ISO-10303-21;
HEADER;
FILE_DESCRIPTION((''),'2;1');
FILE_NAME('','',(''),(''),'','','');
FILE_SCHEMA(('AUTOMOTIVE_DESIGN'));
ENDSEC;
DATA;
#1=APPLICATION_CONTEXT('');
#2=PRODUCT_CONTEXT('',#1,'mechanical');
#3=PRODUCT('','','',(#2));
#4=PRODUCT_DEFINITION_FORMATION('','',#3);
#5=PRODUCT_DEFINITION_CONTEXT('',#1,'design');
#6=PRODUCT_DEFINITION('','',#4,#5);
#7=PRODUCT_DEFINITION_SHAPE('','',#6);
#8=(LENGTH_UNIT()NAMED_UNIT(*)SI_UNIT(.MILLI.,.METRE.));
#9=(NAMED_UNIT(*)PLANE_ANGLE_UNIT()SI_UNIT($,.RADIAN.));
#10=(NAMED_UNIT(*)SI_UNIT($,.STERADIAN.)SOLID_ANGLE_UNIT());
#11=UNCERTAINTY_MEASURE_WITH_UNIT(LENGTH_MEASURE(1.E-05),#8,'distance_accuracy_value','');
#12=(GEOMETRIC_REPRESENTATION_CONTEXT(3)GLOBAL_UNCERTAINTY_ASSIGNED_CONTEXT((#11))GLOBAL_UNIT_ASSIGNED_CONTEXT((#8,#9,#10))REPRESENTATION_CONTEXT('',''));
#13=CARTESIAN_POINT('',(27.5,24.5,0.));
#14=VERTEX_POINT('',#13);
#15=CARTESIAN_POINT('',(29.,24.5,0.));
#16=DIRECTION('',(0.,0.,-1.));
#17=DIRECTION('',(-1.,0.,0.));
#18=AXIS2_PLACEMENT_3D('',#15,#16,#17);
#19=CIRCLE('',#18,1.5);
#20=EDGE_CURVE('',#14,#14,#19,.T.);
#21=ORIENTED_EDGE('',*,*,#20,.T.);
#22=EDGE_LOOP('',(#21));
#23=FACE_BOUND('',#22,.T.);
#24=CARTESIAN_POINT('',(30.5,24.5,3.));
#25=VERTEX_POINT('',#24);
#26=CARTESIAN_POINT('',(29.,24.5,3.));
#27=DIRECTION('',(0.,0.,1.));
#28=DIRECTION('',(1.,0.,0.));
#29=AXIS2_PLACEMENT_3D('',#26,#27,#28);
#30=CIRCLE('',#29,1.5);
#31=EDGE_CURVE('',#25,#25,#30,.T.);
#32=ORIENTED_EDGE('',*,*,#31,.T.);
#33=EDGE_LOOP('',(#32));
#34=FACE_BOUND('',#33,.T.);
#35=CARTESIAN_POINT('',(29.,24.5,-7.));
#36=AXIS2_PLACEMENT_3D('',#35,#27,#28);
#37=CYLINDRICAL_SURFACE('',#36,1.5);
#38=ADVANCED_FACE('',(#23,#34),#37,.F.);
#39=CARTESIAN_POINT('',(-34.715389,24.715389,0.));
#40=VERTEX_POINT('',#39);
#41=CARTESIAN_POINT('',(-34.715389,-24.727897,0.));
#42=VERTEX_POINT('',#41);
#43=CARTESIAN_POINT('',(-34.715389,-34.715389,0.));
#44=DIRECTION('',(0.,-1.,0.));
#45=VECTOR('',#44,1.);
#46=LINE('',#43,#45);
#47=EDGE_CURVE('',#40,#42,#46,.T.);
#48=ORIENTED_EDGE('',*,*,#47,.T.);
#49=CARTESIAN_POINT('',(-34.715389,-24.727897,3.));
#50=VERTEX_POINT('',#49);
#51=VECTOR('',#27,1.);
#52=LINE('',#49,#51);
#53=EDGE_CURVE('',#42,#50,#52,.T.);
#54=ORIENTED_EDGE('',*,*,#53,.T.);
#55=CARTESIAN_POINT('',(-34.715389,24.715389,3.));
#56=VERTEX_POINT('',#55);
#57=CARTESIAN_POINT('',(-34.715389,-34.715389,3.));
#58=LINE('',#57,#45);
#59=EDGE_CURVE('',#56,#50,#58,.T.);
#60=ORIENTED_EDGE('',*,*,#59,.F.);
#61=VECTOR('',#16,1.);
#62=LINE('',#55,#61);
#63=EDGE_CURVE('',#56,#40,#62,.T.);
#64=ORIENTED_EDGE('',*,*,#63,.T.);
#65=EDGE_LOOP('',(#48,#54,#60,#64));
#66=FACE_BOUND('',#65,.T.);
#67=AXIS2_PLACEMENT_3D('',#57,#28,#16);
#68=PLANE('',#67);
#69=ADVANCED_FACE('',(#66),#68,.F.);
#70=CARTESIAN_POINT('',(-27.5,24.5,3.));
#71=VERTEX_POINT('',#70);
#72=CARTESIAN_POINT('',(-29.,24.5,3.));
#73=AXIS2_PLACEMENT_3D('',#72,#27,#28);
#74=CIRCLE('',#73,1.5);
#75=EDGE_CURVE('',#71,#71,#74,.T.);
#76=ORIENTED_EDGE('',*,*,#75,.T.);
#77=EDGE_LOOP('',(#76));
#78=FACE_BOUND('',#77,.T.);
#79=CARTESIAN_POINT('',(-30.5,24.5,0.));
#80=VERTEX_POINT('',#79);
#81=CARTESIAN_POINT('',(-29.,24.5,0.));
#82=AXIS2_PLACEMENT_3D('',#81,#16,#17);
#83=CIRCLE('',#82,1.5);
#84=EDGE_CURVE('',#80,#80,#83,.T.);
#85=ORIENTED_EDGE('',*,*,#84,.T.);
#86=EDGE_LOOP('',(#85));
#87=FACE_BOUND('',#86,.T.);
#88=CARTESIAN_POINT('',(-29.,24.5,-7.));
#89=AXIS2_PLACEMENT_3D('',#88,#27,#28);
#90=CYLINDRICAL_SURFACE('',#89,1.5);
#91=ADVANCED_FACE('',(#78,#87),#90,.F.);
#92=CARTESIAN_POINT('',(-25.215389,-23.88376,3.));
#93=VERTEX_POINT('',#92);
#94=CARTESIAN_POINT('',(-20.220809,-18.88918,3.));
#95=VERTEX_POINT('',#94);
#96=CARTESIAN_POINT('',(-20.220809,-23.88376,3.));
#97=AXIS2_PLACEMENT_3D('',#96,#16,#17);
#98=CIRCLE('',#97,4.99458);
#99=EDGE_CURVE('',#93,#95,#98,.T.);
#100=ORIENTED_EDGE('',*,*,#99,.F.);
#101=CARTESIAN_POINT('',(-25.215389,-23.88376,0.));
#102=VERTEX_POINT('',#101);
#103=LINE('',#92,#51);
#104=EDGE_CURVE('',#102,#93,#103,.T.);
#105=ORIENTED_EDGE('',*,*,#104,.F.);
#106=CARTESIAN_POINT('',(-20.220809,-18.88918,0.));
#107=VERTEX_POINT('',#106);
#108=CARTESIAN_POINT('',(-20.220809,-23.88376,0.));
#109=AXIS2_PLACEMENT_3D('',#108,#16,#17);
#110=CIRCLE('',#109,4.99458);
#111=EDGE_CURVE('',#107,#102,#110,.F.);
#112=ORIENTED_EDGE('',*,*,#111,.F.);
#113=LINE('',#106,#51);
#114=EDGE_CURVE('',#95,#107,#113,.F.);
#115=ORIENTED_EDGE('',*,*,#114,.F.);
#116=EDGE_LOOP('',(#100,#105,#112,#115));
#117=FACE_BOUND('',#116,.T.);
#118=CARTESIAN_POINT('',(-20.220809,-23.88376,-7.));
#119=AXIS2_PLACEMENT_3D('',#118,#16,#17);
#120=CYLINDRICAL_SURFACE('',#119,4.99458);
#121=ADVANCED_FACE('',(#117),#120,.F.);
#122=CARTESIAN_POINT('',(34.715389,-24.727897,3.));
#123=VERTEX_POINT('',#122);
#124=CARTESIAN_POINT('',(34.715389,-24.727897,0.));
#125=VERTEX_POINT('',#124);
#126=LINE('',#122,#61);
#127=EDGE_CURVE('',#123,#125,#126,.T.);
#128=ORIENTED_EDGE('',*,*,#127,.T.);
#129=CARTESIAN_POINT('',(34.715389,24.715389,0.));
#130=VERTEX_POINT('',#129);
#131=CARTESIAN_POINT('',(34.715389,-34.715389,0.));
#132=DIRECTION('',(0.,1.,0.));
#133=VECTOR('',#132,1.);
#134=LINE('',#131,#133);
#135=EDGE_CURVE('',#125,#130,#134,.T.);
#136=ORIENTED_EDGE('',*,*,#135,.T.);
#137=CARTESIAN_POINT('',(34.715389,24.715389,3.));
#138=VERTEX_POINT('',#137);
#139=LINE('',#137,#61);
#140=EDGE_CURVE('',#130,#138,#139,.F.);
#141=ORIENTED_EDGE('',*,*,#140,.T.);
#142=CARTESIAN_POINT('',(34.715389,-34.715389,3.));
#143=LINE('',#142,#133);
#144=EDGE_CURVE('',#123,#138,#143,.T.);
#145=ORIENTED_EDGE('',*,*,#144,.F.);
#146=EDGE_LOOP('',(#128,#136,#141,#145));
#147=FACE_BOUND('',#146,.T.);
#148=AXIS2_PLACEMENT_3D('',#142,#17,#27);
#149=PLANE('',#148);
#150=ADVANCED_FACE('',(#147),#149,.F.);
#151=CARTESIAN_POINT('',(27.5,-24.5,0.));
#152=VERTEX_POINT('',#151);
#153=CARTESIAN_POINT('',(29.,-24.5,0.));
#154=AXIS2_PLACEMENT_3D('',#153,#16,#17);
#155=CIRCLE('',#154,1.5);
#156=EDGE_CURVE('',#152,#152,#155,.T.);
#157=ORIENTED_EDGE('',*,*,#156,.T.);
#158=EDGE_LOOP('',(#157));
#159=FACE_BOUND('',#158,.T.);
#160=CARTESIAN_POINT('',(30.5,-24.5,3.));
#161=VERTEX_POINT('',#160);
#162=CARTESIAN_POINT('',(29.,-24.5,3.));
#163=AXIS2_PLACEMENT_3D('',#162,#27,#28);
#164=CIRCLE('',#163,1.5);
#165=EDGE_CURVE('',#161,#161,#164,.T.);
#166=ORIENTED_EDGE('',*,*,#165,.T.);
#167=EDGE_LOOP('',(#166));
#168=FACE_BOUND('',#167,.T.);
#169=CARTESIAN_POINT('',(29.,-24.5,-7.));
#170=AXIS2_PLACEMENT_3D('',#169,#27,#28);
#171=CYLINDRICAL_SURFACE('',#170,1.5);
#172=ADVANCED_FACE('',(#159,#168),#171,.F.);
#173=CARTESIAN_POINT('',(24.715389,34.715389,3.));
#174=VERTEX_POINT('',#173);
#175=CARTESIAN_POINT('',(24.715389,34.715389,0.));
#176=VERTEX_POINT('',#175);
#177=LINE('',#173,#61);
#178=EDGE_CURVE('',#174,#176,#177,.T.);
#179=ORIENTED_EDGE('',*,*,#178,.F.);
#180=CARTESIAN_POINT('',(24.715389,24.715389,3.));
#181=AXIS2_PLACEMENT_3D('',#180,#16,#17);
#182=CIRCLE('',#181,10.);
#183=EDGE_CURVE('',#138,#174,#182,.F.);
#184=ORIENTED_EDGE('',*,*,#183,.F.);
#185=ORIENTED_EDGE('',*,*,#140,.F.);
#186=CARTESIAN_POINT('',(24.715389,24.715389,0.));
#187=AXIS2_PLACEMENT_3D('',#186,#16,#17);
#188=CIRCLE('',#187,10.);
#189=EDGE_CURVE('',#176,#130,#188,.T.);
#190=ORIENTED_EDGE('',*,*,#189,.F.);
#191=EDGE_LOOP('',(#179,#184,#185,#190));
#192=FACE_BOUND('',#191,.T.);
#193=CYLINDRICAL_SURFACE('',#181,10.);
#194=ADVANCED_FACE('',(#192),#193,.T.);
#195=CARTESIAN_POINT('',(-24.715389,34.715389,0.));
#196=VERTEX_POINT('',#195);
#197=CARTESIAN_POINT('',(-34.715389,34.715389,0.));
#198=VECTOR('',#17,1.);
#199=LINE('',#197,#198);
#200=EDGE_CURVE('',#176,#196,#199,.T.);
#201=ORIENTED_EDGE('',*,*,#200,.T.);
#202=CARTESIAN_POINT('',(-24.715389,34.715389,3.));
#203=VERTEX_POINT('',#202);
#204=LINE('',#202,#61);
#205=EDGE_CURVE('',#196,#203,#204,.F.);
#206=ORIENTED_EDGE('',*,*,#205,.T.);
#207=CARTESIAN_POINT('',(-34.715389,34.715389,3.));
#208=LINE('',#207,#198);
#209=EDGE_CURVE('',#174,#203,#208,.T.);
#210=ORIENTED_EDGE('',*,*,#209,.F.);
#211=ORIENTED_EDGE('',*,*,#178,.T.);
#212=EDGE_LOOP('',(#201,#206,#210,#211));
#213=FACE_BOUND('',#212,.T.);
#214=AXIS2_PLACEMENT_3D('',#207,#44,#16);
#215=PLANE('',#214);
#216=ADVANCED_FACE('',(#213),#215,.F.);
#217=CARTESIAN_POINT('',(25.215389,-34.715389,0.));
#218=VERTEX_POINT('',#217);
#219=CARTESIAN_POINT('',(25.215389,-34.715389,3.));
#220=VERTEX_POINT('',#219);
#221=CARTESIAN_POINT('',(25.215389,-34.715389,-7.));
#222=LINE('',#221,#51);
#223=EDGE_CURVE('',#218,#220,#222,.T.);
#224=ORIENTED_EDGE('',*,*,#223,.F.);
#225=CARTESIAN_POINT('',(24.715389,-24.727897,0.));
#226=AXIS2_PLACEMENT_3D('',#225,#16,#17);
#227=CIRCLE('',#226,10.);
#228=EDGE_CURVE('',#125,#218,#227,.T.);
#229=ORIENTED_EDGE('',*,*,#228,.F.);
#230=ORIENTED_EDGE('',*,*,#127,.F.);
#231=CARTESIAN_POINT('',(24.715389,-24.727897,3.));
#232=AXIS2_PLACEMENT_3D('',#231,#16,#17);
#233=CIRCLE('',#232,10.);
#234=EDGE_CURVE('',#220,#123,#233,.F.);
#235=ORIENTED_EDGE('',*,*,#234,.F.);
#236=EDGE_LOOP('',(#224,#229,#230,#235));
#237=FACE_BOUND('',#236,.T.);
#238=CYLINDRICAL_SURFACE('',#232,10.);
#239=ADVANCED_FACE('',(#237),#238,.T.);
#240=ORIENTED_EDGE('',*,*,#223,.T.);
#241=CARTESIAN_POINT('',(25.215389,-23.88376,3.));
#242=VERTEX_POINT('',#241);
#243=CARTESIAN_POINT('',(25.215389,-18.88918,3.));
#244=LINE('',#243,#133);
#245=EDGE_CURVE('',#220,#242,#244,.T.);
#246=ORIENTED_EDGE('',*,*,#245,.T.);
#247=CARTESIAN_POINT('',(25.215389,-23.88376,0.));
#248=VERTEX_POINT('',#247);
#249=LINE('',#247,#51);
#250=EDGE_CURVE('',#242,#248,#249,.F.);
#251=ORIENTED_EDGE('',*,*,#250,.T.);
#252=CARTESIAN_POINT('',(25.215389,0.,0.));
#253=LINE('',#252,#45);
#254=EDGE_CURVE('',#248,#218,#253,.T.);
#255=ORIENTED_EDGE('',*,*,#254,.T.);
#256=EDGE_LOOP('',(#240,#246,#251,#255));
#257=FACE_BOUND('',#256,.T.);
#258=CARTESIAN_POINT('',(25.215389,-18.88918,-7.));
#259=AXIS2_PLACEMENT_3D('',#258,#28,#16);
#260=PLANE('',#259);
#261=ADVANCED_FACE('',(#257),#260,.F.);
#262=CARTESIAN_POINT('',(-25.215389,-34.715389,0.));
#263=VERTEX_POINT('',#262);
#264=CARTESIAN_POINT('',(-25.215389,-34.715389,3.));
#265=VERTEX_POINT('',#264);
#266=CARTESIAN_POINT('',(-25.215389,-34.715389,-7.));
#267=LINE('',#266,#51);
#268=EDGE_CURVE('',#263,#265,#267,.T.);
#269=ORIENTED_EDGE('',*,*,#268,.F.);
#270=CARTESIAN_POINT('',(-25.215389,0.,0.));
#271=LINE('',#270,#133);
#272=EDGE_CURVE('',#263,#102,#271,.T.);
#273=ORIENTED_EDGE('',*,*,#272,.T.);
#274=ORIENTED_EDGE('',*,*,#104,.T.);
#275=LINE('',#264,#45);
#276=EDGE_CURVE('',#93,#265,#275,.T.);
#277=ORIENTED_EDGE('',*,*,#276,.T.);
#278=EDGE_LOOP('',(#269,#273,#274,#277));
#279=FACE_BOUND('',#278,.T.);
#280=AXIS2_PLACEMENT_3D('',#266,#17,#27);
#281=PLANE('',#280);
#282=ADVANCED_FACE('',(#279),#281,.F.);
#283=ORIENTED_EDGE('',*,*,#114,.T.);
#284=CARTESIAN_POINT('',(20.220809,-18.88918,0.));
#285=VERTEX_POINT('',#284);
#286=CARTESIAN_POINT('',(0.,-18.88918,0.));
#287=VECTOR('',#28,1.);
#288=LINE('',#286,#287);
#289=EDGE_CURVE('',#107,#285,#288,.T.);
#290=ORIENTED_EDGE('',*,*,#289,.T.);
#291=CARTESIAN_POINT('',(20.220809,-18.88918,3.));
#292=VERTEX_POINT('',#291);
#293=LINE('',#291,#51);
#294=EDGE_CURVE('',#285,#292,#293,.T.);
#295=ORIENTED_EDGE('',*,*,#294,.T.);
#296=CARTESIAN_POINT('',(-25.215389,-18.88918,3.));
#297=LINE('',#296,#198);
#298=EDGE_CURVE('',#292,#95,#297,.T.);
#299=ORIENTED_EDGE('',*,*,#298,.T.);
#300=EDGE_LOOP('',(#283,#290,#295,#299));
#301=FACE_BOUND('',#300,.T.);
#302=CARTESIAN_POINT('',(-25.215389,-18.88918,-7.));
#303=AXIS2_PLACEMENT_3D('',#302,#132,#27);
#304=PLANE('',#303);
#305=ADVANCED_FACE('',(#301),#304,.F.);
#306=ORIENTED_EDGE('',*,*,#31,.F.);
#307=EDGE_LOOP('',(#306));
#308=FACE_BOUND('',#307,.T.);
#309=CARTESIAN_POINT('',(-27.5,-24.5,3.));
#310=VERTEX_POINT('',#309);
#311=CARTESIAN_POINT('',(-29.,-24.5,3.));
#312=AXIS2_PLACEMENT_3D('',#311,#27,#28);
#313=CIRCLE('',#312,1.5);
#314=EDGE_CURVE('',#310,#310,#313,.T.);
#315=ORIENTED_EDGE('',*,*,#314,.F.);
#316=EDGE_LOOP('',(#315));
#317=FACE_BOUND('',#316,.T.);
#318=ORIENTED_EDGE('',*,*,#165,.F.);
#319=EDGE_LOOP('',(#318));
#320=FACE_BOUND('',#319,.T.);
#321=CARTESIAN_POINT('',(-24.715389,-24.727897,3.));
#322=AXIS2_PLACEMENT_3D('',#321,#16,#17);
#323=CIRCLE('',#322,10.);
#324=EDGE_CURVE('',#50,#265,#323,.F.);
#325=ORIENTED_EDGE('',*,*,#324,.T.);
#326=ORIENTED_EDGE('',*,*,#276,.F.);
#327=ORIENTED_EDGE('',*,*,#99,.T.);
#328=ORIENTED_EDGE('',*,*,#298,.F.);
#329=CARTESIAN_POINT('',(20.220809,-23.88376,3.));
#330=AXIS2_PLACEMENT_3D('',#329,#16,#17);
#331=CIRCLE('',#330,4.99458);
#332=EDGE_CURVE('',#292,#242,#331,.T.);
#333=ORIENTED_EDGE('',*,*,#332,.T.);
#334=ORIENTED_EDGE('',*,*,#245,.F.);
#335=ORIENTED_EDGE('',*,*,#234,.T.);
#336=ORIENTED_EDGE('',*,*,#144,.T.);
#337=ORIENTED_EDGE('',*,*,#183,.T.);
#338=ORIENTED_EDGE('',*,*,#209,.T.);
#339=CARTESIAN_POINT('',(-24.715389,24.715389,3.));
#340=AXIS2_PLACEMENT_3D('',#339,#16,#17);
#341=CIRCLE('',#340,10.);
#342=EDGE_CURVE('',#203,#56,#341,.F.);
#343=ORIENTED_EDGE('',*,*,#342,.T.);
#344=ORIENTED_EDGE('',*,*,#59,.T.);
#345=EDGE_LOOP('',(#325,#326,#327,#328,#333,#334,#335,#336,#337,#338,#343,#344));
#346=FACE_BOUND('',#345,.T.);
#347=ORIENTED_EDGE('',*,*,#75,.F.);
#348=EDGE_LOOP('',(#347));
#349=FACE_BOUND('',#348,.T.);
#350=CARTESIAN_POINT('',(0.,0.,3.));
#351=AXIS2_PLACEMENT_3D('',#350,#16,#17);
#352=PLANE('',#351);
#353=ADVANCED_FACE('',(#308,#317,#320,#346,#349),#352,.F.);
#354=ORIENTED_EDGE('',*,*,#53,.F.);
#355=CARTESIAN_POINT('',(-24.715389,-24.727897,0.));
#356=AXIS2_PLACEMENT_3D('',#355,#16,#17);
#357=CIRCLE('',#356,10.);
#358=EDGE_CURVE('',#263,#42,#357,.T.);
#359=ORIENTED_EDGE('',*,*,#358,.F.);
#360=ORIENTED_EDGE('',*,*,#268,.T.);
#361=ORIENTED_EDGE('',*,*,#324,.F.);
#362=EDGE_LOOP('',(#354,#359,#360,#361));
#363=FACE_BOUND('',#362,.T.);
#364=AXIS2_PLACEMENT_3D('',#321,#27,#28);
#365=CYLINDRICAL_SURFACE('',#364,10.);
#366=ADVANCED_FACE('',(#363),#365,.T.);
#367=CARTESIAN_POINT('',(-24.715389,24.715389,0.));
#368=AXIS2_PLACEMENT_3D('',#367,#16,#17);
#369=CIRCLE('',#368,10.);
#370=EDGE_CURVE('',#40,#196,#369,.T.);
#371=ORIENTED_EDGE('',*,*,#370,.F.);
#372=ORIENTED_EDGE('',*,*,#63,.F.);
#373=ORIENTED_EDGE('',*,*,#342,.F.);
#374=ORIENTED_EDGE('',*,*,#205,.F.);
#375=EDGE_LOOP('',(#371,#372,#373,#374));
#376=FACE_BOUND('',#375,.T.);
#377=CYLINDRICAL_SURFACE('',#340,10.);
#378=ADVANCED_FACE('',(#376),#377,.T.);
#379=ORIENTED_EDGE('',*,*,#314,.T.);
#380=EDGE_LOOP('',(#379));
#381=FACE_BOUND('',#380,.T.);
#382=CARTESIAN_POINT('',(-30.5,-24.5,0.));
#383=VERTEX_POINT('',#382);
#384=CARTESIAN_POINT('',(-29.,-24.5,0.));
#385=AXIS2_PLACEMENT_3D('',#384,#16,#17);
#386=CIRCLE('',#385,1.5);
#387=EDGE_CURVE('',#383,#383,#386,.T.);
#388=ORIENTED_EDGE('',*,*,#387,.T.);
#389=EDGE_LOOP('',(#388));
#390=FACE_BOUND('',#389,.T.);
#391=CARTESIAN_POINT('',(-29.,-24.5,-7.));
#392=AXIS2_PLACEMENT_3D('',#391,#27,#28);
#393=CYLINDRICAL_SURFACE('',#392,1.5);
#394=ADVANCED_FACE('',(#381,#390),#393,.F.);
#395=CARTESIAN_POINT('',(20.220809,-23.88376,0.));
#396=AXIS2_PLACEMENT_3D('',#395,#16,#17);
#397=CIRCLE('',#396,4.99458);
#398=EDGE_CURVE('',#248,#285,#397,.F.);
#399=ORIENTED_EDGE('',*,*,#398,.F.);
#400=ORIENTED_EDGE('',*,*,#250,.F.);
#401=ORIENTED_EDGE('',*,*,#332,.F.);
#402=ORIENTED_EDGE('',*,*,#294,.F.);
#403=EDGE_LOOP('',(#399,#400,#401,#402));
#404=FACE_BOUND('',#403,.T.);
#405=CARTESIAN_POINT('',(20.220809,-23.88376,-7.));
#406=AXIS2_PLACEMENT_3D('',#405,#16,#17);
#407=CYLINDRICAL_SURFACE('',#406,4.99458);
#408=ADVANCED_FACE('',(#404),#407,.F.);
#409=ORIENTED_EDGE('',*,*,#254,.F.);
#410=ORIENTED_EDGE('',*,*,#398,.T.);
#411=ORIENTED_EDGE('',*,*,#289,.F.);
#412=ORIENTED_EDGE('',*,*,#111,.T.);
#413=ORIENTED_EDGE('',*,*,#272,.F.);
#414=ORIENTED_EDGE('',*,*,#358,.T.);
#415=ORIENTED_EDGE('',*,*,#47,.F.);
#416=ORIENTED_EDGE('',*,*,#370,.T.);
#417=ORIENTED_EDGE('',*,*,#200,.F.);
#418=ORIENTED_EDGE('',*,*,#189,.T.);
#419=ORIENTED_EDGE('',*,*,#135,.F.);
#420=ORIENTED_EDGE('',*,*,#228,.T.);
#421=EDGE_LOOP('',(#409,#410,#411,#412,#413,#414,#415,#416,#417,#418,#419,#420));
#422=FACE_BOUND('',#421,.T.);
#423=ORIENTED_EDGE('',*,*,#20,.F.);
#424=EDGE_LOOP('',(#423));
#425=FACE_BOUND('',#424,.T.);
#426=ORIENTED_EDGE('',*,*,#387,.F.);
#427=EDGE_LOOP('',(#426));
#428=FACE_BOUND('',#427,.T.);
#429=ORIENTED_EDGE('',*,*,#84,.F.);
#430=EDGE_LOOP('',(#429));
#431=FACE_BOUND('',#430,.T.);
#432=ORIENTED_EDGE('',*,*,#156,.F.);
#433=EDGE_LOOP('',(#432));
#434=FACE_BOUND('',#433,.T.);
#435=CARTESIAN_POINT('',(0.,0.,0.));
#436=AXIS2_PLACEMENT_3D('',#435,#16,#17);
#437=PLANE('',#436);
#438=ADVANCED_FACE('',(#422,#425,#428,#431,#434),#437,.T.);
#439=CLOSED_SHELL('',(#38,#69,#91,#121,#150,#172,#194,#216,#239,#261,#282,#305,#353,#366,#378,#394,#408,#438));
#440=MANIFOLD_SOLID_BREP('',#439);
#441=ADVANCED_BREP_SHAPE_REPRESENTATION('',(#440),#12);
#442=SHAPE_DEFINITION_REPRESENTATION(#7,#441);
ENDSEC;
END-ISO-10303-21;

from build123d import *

# Parameters (mm, degrees)
SKETCH1_W           = 69.43077851
SKETCH1_H           = 69.43077851
BOSS_EXTRUDE2_DEPTH = 3
SKETCH6_R           = 1.5
SKETCH6_W           = 50.43077851
SKETCH6_H           = 15.826208999
CUT_EXTRUDE1_DEPTH  = 10
FILLET1_R           = 10
FILLET2_R           = 10
FILLET3_R           = 4.994579941


with BuildPart() as part:
    # Sketch1 → Boss-Extrude2 (new body)
    with BuildSketch(Plane.XY):
        Rectangle(SKETCH1_W, SKETCH1_H)
    extrude(amount=BOSS_EXTRUDE2_DEPTH)

    # Sketch6 → Cut-Extrude1 (cut)
    with BuildSketch(Plane.XY.offset(3)):
        with Locations((-29, 24.5)):
            Circle(SKETCH6_R)
        with Locations((-29, -24.5)):
            Circle(SKETCH6_R)
        with Locations((29, -24.5)):
            Circle(SKETCH6_R)
        with Locations((29, 24.5)):
            Circle(SKETCH6_R)
        with Locations((0, -26.802284756)):
            Rectangle(SKETCH6_W, SKETCH6_H)
    extrude(amount=-CUT_EXTRUDE1_DEPTH, mode=Mode.SUBTRACT)

    # Fillet1
    fillet1_edges = [part.edges().sort_by_distance(p)[0] for p in [
        (34.715389255, 34.715389255, 1.5),
    ]]
    fillet(fillet1_edges, radius=FILLET1_R)

    # Fillet2
    # the kernel refuses this fillet: 10 mm, written as the material it takes off along each edge
    with BuildSketch(Plane(origin=(34.715389255, -34.715389255, -24.968730444), x_dir=(0, 1, 0), z_dir=(0, 0, 1))) as fillet2_piece_1:
        with BuildLine():
            CenterArc((9.987492178, 10), FILLET2_R, 182.865983983, 87.134016017)
            Line((0, 9.5), (-0.199749844, 9.49))
            ThreePointArc((-0.199749844, 9.49), (-0.2, 4.75), (-0.2, 0))
            Line((-0.2, 0), (0, -0.2))
            Line((0, -0.2), (9.987492178, -0.2))
            Line((9.987492178, -0.2), (9.987492178, 0))
        make_face()
    extrude(amount=52.937460889, mode=Mode.SUBTRACT)
    with BuildSketch(Plane(origin=(-34.715389255, -34.715389255, -24.968730444), x_dir=(0, 1, 0), z_dir=(0, 0, 1))) as fillet2_piece_2:
        with BuildLine():
            CenterArc((9.987492178, -10), FILLET2_R, 90, 87.134016017)
            Line((0, -9.5), (-0.199749844, -9.49))
            ThreePointArc((-0.199749844, -9.49), (-0.2, -4.75), (-0.2, 0))
            Line((-0.2, 0), (0, 0.2))
            Line((0, 0.2), (9.987492178, 0.2))
            Line((9.987492178, 0.2), (9.987492178, 0))
        make_face()
    extrude(amount=52.937460889, mode=Mode.SUBTRACT)
    with BuildSketch(Plane(origin=(-34.715389255, 34.715389255, -25), x_dir=(1, 0, 0), z_dir=(0, 0, 1))) as fillet2_piece_3:
        with BuildLine():
            CenterArc((FILLET2_R, -FILLET2_R), FILLET2_R, 90, 90)
            Line((0, -FILLET2_R), (-FILLET2_R * 0.02, -FILLET2_R))
            Line((-FILLET2_R * 0.02, -FILLET2_R), (-FILLET2_R * 0.02, FILLET2_R * 0.02))
            Line((-FILLET2_R * 0.02, FILLET2_R * 0.02), (FILLET2_R, FILLET2_R * 0.02))
            Line((FILLET2_R, FILLET2_R * 0.02), (FILLET2_R, 0))
        make_face()
    extrude(amount=53, mode=Mode.SUBTRACT)

    # Fillet3
    fillet3_edges = [part.edges().sort_by_distance(p)[0] for p in [
        (-25.215389255, -18.889180256, 1.5),
        (25.215389255, -18.889180256, 1.5),
    ]]
    fillet(fillet3_edges, radius=FILLET3_R)


solid = part.part
